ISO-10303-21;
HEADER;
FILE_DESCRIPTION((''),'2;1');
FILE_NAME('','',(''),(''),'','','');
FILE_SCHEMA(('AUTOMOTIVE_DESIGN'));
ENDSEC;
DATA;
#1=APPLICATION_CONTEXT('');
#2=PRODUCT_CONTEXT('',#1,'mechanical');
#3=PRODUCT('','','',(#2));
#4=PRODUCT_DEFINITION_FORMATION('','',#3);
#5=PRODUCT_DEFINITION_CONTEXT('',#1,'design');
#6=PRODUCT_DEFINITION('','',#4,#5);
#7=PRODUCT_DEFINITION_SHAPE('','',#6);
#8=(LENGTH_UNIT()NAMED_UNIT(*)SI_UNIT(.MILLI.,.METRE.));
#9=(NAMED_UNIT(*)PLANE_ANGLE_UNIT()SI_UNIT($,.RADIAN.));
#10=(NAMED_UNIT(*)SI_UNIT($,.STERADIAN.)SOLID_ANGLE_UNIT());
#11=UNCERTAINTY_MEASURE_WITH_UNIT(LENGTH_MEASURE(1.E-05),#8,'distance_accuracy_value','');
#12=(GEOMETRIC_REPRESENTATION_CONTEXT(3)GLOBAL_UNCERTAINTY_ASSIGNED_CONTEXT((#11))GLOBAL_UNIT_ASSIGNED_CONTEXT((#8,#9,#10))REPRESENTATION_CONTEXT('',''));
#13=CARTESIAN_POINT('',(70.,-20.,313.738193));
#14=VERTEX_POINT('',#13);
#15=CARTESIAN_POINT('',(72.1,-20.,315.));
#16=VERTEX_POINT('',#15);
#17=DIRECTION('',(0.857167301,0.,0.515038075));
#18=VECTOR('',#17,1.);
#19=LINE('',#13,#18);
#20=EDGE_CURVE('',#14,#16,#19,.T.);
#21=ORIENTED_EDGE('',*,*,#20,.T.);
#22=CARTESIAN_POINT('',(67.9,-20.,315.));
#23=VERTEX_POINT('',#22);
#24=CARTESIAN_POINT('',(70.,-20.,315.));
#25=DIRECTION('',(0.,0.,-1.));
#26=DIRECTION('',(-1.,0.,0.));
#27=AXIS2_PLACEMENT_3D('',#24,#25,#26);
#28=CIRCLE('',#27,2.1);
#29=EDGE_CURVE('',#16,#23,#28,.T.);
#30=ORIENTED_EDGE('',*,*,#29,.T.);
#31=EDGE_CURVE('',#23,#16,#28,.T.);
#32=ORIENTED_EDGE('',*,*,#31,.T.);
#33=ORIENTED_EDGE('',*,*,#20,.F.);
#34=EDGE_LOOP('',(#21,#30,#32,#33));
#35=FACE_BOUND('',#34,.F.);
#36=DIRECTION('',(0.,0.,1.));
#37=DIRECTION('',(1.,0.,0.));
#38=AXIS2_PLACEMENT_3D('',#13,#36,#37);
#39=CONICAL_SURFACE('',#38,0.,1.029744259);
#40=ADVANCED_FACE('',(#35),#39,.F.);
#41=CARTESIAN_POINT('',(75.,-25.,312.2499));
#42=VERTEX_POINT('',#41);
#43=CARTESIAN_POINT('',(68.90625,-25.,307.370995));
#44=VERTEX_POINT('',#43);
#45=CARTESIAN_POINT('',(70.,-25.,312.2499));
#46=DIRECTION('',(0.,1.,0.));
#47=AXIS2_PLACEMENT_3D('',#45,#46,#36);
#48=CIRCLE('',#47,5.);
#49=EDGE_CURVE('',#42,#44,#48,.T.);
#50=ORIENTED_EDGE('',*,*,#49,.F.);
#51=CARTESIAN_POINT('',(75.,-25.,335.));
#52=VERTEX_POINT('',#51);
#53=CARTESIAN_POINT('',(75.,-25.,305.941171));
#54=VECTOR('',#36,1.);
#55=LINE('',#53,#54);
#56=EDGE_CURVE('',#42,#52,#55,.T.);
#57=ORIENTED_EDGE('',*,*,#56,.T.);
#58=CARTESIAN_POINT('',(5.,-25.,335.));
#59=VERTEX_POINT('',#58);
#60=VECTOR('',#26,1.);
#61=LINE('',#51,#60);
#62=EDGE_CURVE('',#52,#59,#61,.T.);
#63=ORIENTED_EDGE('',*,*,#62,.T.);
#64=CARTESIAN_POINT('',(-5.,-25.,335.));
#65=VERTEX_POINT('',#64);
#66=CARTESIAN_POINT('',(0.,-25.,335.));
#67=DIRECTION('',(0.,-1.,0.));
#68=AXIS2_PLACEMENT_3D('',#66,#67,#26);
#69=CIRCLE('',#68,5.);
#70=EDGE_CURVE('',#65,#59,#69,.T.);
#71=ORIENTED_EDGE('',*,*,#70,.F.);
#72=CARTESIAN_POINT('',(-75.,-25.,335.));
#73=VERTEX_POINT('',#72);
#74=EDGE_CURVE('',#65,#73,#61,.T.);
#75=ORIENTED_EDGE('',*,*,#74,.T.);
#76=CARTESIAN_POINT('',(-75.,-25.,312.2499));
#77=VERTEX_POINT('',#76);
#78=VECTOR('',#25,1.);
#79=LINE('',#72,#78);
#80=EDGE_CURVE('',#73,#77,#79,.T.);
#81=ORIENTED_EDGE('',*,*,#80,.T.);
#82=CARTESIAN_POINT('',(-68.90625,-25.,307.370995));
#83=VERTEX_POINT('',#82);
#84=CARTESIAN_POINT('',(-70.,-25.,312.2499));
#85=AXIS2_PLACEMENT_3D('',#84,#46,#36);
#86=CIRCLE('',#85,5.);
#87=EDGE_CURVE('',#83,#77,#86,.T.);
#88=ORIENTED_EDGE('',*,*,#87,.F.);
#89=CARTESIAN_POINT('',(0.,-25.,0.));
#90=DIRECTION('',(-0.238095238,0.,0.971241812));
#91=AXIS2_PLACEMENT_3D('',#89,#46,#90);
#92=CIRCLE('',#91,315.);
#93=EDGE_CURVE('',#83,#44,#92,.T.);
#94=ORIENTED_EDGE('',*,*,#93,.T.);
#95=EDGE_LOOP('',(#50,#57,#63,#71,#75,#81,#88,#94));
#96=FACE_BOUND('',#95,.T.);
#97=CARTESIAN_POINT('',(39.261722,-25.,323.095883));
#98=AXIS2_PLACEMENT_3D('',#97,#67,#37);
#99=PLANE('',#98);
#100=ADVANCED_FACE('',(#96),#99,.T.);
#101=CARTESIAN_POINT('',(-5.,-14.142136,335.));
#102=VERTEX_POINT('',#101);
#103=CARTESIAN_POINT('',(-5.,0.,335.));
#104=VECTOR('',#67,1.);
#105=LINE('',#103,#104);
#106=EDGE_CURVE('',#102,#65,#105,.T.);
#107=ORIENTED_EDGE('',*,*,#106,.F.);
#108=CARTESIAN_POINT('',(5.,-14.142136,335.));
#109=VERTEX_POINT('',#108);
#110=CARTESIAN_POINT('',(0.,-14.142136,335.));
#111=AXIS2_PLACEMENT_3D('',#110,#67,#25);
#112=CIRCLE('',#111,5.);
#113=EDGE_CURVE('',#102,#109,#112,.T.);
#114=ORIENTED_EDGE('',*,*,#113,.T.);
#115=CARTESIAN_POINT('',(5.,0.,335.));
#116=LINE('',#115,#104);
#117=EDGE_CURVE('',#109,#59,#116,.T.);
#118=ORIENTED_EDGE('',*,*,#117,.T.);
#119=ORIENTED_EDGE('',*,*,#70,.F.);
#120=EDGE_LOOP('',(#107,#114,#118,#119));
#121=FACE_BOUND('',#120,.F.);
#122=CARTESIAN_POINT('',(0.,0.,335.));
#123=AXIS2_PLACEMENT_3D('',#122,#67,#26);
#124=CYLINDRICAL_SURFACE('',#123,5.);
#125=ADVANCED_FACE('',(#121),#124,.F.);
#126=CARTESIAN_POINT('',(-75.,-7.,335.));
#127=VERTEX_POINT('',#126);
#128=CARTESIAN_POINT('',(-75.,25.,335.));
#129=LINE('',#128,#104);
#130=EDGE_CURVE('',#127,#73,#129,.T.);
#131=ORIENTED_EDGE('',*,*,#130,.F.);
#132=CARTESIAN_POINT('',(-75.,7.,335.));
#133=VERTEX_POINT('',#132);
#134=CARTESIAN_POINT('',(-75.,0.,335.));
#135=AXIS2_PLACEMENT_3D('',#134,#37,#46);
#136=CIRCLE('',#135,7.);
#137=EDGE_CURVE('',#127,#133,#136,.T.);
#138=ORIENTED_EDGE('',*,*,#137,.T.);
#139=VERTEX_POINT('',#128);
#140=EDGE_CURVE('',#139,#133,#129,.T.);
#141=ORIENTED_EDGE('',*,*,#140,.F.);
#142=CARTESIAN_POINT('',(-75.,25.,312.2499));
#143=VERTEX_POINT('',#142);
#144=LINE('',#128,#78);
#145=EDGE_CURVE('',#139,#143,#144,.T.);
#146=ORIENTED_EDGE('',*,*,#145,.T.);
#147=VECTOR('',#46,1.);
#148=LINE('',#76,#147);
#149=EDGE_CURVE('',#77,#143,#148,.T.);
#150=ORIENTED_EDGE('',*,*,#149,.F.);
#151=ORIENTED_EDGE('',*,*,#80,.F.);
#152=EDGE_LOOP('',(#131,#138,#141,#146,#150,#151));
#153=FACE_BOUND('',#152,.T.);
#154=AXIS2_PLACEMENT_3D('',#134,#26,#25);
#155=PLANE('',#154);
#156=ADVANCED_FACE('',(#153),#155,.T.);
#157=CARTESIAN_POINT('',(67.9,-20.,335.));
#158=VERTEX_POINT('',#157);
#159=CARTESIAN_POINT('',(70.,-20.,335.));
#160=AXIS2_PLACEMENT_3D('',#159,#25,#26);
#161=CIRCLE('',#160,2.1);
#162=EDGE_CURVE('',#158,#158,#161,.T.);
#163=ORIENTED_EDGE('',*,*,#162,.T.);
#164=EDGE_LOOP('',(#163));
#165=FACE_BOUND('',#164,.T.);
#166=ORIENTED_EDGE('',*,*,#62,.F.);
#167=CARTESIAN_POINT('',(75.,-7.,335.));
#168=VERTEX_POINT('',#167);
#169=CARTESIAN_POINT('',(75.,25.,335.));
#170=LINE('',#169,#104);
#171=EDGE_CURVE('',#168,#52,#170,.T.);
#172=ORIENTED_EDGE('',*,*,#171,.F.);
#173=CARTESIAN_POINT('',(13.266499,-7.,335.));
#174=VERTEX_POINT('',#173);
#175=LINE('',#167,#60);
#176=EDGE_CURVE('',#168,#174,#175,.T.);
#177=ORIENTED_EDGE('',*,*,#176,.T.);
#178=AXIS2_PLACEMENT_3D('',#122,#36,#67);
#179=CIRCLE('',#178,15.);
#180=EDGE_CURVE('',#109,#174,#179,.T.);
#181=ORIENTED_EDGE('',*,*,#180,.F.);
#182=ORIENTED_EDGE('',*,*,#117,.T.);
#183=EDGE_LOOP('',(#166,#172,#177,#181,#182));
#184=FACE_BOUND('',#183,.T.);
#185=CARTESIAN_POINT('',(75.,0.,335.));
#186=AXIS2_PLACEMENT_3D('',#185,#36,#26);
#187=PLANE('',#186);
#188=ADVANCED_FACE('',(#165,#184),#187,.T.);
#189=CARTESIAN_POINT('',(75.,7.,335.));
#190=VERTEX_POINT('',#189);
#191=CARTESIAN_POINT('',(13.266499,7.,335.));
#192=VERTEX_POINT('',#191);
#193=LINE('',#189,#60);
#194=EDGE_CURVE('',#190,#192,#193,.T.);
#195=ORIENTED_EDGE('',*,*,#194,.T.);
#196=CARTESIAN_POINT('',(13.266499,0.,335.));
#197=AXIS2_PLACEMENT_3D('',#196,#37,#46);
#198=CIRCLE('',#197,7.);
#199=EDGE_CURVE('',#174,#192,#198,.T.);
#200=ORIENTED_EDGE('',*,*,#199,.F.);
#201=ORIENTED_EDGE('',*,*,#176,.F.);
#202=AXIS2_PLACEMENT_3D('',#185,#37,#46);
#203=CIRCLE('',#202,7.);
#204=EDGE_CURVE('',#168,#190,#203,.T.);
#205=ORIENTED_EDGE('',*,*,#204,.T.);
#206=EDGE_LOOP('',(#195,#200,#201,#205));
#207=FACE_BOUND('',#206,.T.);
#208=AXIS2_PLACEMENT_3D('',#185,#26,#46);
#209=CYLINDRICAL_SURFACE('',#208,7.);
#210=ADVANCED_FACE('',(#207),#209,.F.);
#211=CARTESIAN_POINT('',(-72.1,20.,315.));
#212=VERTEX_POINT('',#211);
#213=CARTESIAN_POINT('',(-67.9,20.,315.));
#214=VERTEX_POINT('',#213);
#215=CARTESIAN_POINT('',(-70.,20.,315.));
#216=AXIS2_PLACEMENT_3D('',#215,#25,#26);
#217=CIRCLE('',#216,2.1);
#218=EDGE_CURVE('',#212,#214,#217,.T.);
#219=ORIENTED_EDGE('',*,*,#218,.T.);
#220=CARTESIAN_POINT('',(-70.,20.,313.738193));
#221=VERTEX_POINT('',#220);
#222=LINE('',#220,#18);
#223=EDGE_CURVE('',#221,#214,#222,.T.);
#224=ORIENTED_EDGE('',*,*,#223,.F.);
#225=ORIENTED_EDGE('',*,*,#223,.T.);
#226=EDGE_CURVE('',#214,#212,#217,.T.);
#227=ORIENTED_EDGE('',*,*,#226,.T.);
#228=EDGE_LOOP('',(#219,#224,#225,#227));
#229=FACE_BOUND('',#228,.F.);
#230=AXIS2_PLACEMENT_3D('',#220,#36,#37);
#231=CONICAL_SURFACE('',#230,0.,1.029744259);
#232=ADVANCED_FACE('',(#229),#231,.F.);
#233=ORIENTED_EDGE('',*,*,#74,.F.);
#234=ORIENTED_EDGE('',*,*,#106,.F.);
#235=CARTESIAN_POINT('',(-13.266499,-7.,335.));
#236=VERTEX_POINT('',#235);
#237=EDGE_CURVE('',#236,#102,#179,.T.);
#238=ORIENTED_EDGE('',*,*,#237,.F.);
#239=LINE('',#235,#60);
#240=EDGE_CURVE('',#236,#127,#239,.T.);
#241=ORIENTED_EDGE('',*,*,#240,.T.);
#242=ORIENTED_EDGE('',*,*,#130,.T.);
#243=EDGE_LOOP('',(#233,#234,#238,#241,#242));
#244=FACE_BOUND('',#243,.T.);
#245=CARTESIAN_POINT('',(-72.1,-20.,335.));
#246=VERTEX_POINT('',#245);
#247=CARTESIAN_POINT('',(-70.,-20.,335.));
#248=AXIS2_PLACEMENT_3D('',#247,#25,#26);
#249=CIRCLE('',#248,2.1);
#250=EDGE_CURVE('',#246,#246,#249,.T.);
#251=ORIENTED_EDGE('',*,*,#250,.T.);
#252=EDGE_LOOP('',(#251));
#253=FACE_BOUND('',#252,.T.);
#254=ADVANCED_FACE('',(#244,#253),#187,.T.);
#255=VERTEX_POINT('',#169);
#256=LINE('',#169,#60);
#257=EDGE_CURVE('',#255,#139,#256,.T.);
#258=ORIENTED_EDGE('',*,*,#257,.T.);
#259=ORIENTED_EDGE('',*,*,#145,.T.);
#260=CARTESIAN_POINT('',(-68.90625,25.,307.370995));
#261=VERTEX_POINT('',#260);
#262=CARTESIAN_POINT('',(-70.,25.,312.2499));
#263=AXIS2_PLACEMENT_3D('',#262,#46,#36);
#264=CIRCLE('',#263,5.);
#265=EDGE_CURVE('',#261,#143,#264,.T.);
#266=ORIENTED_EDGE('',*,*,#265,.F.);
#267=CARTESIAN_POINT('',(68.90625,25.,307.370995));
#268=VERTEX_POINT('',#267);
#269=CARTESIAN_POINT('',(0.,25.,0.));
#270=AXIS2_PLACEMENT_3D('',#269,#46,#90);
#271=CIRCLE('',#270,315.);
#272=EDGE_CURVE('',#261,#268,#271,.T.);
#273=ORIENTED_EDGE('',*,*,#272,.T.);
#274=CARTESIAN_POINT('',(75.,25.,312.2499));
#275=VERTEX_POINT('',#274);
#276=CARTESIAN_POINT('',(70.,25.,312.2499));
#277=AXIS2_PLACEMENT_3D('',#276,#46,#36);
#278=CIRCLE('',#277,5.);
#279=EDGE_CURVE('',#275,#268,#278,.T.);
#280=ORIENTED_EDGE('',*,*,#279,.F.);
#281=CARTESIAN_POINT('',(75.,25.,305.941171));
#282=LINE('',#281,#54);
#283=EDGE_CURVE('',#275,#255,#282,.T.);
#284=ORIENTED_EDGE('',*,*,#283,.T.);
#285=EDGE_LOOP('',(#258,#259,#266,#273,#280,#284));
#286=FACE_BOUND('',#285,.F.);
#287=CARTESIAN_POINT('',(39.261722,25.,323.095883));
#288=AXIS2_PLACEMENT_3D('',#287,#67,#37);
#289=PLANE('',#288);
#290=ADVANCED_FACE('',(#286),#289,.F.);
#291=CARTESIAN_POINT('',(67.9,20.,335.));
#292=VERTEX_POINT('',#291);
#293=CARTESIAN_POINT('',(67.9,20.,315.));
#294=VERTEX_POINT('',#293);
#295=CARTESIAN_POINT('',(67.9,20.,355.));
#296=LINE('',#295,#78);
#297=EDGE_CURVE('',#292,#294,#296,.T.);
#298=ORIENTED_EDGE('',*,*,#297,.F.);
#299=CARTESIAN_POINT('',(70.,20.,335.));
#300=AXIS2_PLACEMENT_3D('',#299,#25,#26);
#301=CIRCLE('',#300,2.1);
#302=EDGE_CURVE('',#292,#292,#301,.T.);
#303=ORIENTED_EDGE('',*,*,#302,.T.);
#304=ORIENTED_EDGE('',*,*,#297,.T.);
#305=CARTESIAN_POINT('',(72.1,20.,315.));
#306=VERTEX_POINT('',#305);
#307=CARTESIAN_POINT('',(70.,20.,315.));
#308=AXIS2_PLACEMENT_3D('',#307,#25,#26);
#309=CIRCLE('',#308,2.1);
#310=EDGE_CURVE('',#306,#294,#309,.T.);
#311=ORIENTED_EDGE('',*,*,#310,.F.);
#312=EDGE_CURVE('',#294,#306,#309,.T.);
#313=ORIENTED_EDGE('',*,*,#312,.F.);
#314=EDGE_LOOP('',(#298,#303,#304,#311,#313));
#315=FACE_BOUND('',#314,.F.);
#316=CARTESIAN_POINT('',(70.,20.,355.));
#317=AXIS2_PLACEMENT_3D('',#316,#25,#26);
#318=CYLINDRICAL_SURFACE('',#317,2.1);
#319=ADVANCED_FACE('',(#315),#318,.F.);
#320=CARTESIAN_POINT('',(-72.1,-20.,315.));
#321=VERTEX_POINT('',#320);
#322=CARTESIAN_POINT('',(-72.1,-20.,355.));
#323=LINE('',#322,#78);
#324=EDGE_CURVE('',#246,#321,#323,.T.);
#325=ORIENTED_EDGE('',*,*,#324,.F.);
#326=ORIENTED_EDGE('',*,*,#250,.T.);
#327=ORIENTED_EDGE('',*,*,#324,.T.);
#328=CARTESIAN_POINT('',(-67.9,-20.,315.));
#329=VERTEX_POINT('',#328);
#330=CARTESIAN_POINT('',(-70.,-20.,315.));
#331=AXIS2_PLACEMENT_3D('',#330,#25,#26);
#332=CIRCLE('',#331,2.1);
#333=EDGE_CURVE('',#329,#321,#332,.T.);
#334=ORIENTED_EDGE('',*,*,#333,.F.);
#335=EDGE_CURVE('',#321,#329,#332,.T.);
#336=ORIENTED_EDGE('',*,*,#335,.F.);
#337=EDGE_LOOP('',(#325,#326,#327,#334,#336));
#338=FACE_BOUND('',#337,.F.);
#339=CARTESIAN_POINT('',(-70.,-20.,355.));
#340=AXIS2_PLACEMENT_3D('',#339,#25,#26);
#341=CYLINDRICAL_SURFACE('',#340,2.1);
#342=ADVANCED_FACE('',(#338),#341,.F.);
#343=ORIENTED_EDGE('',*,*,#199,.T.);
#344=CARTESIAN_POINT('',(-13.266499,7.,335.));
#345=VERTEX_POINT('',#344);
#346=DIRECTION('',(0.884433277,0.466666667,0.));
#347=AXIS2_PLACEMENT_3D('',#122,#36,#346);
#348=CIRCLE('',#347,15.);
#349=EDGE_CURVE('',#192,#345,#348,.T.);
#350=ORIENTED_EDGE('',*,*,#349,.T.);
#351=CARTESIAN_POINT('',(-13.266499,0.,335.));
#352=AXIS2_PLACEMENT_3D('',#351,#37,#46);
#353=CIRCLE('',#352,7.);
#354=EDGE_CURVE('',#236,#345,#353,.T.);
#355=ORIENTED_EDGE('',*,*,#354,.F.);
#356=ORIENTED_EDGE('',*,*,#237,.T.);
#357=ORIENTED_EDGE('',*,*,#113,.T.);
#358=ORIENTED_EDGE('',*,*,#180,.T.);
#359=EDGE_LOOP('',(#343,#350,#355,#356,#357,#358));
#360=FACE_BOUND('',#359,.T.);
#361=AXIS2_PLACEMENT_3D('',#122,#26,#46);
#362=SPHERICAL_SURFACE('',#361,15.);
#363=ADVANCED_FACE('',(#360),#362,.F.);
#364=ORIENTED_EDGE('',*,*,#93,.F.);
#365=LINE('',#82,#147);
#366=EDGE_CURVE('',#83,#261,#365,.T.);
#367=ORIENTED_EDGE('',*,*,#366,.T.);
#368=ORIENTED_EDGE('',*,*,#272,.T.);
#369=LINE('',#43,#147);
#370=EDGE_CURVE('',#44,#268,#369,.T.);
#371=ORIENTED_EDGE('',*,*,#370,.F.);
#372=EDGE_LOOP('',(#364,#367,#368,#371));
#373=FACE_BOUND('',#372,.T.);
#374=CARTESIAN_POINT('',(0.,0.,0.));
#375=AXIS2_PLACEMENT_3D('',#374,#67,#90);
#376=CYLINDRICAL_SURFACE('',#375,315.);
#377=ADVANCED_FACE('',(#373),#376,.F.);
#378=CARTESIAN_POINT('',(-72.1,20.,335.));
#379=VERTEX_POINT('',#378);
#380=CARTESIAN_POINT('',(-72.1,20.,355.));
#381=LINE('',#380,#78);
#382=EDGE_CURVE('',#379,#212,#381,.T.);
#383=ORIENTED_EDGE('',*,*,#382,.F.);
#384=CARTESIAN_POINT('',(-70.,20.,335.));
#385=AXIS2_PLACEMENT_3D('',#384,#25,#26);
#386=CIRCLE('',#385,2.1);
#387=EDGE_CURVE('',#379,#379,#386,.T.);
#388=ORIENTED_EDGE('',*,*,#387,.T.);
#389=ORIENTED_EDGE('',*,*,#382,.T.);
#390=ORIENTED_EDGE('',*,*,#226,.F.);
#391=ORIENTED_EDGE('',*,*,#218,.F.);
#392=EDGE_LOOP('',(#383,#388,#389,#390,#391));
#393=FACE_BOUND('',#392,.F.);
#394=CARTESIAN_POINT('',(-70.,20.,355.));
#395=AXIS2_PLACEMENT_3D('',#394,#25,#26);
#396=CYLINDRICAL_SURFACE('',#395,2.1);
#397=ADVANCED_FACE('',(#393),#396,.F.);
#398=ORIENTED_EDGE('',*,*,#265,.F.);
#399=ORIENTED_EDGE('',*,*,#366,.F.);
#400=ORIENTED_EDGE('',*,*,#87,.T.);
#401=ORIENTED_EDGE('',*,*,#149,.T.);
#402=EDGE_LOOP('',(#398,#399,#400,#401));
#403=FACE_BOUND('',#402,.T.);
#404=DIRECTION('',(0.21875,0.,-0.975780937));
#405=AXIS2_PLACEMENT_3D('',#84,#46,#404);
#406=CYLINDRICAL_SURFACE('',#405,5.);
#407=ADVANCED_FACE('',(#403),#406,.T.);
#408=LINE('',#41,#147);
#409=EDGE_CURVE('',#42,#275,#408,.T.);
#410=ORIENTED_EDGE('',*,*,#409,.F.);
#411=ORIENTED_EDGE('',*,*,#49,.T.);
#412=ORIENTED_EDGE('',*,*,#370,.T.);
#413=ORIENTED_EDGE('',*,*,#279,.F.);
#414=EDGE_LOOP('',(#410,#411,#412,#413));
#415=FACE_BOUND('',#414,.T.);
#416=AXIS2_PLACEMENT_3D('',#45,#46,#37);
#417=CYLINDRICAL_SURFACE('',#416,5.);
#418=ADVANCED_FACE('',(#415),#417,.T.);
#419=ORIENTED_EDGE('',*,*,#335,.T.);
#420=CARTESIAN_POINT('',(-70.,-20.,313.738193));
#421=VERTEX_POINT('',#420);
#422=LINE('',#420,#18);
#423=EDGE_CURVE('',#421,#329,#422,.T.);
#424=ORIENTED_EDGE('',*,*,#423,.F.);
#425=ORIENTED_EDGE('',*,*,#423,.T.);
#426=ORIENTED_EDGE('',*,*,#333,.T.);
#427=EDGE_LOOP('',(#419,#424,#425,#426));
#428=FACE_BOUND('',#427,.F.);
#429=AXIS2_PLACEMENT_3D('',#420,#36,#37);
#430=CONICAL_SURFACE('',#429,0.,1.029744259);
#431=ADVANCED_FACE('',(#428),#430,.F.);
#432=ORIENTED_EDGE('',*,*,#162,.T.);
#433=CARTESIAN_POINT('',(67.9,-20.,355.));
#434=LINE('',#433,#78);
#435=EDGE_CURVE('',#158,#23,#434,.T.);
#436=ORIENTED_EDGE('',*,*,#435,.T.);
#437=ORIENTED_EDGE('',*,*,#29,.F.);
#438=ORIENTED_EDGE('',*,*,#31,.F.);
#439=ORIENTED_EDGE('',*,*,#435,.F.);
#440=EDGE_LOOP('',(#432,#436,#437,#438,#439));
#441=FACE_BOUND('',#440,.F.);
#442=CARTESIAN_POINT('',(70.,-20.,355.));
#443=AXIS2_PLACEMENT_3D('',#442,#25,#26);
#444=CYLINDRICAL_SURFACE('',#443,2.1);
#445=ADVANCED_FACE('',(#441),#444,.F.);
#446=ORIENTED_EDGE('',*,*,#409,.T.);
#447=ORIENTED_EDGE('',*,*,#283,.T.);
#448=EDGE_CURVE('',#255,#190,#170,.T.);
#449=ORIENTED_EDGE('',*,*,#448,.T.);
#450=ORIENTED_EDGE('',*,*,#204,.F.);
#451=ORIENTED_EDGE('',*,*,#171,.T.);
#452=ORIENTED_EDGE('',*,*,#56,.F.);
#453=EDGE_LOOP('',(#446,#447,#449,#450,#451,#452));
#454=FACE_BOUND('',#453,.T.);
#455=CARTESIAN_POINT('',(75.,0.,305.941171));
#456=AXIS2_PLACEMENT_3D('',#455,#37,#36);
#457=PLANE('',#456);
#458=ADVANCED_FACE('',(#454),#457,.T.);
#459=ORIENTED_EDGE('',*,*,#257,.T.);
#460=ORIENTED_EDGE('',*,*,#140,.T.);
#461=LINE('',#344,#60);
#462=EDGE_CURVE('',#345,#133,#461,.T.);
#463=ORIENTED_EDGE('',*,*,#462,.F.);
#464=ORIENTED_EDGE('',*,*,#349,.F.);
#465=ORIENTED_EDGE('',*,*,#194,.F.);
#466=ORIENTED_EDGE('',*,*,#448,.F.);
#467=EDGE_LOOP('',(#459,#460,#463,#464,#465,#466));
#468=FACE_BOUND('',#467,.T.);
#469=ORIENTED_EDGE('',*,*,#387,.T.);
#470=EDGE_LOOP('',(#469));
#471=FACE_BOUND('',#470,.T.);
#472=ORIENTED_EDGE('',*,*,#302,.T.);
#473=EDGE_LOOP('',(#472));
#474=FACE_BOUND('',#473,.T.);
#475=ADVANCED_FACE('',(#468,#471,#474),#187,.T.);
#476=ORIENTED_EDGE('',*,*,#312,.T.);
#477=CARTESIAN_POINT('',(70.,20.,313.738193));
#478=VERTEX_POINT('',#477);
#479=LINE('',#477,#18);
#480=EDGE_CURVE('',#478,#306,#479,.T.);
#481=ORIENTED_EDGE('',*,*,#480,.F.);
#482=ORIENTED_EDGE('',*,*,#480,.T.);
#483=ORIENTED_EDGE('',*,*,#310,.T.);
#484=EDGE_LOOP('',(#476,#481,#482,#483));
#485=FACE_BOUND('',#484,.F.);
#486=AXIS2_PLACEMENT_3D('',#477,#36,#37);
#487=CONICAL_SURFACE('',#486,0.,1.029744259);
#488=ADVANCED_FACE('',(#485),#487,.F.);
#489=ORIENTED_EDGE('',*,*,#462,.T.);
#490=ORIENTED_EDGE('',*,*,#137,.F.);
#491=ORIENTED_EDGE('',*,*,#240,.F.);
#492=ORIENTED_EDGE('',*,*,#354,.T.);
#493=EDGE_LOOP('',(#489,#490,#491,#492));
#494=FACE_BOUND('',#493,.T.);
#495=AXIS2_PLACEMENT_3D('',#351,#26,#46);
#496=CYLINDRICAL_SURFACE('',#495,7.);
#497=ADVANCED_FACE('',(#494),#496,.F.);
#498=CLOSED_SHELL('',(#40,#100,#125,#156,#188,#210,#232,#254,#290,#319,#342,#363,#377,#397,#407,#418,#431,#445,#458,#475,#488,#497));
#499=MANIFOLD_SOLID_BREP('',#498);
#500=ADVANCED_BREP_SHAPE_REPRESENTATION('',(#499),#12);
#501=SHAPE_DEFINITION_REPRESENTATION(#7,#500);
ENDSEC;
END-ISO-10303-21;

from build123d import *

# Parameters (mm, degrees)
F1_DEPTH = 25
F5_D     = 4.2
F5_DEPTH = 20
F5_TIP   = 1.2618073
F6_R     = 5


with BuildPart() as f1:
    # F0 (on Front) → F1 (new body, symmetric)
    with BuildSketch(Plane.XZ):
        with BuildLine():
            ThreePointArc((0, 315), (37.7725508345, 312.7270925319), (75, 305.9411708156))
            Line((75, 305.9411708156), (75, 335))
            Line((75, 335), (0, 335))
            Line((0, 335), (0, 315))
        make_face()
        with BuildLine():
            ThreePointArc((-75, 305.9411708156), (-37.7725508345, 312.7270925319), (0, 315))
            Line((0, 315), (0, 335))
            Line((0, 335), (-75, 335))
            Line((-75, 335), (-75, 305.9411708156))
        make_face()
    extrude(amount=F1_DEPTH, both=True)

    # F2 (on face) → F3 (revolve, cut)
    with BuildSketch(Plane.XY.offset(335)):
        with BuildLine():
            Line((-13.2664991614, 7), (-75, 7))
            Line((-75, 7), (-75, 0))
            Line((-75, 0), (-15, 0))
            ThreePointArc((-15, 0), (-14.5601766373, 3.6057254872), (-13.2664991614, 7))
        make_face()
        with BuildLine():
            ThreePointArc((13.2664991614, 7), (0, 15), (-13.2664991614, 7))
            ThreePointArc((-13.2664991614, 7), (-14.5601766373, 3.6057254872), (-15, 0))
            Line((-15, 0), (-13.2664991614, 0))
            Line((-13.2664991614, 0), (13.2664991614, 0))
            Line((13.2664991614, 0), (15, 0))
            ThreePointArc((15, 0), (14.5601766373, 3.6057254872), (13.2664991614, 7))
        make_face()
        with BuildLine():
            Line((75, 7), (13.2664991614, 7))
            ThreePointArc((13.2664991614, 7), (14.5601766373, 3.6057254872), (15, 0))
            Line((15, 0), (75, 0))
            Line((75, 0), (75, 7))
        make_face()
    revolve(axis=Axis((-44.1332495807, 0, 335), (1, 0, 0)), mode=Mode.SUBTRACT)

    # F5
    with Locations(Plane.XY.offset(335)):
        with Locations((-70, 20), (-70, -20), (70, 20), (70, -20)):
            Hole(F5_D / 2, depth=F5_DEPTH)
            with Locations((0, 0, -(F5_DEPTH + F5_TIP / 2))):  # 118° drill point
                Cone(0, F5_D / 2, F5_TIP, mode=Mode.SUBTRACT)

    # F6
    f6_edges = [f1.edges().sort_by_distance(p)[0] for p in [
        (-75, 0, 305.941171),
        (75, 0, 305.941171),
    ]]
    fillet(f6_edges, radius=F6_R)

    # F7 (on face) → F8 (revolve, cut)
    with BuildSketch(Plane.XY.offset(335)):
        with BuildLine():
            Line((0, 0), (-5, 0))
            Line((-5, 0), (-5, -14.1421356237))
            ThreePointArc((-5, -14.1421356237), (-2.5365296809, -14.7839783948), (0, -15))
            Line((0, -15), (0, 0))
        make_face()
        with BuildLine():
            ThreePointArc((0, -15), (-2.5365296809, -14.7839783948), (-5, -14.1421356237))
            Line((-5, -14.1421356237), (-5, -25))
            Line((-5, -25), (0, -25))
            Line((0, -25), (0, -15))
        make_face()
    revolve(axis=Axis((0, -12.5, 335), (0, -1, 0)), mode=Mode.SUBTRACT)


solid = f1.part
